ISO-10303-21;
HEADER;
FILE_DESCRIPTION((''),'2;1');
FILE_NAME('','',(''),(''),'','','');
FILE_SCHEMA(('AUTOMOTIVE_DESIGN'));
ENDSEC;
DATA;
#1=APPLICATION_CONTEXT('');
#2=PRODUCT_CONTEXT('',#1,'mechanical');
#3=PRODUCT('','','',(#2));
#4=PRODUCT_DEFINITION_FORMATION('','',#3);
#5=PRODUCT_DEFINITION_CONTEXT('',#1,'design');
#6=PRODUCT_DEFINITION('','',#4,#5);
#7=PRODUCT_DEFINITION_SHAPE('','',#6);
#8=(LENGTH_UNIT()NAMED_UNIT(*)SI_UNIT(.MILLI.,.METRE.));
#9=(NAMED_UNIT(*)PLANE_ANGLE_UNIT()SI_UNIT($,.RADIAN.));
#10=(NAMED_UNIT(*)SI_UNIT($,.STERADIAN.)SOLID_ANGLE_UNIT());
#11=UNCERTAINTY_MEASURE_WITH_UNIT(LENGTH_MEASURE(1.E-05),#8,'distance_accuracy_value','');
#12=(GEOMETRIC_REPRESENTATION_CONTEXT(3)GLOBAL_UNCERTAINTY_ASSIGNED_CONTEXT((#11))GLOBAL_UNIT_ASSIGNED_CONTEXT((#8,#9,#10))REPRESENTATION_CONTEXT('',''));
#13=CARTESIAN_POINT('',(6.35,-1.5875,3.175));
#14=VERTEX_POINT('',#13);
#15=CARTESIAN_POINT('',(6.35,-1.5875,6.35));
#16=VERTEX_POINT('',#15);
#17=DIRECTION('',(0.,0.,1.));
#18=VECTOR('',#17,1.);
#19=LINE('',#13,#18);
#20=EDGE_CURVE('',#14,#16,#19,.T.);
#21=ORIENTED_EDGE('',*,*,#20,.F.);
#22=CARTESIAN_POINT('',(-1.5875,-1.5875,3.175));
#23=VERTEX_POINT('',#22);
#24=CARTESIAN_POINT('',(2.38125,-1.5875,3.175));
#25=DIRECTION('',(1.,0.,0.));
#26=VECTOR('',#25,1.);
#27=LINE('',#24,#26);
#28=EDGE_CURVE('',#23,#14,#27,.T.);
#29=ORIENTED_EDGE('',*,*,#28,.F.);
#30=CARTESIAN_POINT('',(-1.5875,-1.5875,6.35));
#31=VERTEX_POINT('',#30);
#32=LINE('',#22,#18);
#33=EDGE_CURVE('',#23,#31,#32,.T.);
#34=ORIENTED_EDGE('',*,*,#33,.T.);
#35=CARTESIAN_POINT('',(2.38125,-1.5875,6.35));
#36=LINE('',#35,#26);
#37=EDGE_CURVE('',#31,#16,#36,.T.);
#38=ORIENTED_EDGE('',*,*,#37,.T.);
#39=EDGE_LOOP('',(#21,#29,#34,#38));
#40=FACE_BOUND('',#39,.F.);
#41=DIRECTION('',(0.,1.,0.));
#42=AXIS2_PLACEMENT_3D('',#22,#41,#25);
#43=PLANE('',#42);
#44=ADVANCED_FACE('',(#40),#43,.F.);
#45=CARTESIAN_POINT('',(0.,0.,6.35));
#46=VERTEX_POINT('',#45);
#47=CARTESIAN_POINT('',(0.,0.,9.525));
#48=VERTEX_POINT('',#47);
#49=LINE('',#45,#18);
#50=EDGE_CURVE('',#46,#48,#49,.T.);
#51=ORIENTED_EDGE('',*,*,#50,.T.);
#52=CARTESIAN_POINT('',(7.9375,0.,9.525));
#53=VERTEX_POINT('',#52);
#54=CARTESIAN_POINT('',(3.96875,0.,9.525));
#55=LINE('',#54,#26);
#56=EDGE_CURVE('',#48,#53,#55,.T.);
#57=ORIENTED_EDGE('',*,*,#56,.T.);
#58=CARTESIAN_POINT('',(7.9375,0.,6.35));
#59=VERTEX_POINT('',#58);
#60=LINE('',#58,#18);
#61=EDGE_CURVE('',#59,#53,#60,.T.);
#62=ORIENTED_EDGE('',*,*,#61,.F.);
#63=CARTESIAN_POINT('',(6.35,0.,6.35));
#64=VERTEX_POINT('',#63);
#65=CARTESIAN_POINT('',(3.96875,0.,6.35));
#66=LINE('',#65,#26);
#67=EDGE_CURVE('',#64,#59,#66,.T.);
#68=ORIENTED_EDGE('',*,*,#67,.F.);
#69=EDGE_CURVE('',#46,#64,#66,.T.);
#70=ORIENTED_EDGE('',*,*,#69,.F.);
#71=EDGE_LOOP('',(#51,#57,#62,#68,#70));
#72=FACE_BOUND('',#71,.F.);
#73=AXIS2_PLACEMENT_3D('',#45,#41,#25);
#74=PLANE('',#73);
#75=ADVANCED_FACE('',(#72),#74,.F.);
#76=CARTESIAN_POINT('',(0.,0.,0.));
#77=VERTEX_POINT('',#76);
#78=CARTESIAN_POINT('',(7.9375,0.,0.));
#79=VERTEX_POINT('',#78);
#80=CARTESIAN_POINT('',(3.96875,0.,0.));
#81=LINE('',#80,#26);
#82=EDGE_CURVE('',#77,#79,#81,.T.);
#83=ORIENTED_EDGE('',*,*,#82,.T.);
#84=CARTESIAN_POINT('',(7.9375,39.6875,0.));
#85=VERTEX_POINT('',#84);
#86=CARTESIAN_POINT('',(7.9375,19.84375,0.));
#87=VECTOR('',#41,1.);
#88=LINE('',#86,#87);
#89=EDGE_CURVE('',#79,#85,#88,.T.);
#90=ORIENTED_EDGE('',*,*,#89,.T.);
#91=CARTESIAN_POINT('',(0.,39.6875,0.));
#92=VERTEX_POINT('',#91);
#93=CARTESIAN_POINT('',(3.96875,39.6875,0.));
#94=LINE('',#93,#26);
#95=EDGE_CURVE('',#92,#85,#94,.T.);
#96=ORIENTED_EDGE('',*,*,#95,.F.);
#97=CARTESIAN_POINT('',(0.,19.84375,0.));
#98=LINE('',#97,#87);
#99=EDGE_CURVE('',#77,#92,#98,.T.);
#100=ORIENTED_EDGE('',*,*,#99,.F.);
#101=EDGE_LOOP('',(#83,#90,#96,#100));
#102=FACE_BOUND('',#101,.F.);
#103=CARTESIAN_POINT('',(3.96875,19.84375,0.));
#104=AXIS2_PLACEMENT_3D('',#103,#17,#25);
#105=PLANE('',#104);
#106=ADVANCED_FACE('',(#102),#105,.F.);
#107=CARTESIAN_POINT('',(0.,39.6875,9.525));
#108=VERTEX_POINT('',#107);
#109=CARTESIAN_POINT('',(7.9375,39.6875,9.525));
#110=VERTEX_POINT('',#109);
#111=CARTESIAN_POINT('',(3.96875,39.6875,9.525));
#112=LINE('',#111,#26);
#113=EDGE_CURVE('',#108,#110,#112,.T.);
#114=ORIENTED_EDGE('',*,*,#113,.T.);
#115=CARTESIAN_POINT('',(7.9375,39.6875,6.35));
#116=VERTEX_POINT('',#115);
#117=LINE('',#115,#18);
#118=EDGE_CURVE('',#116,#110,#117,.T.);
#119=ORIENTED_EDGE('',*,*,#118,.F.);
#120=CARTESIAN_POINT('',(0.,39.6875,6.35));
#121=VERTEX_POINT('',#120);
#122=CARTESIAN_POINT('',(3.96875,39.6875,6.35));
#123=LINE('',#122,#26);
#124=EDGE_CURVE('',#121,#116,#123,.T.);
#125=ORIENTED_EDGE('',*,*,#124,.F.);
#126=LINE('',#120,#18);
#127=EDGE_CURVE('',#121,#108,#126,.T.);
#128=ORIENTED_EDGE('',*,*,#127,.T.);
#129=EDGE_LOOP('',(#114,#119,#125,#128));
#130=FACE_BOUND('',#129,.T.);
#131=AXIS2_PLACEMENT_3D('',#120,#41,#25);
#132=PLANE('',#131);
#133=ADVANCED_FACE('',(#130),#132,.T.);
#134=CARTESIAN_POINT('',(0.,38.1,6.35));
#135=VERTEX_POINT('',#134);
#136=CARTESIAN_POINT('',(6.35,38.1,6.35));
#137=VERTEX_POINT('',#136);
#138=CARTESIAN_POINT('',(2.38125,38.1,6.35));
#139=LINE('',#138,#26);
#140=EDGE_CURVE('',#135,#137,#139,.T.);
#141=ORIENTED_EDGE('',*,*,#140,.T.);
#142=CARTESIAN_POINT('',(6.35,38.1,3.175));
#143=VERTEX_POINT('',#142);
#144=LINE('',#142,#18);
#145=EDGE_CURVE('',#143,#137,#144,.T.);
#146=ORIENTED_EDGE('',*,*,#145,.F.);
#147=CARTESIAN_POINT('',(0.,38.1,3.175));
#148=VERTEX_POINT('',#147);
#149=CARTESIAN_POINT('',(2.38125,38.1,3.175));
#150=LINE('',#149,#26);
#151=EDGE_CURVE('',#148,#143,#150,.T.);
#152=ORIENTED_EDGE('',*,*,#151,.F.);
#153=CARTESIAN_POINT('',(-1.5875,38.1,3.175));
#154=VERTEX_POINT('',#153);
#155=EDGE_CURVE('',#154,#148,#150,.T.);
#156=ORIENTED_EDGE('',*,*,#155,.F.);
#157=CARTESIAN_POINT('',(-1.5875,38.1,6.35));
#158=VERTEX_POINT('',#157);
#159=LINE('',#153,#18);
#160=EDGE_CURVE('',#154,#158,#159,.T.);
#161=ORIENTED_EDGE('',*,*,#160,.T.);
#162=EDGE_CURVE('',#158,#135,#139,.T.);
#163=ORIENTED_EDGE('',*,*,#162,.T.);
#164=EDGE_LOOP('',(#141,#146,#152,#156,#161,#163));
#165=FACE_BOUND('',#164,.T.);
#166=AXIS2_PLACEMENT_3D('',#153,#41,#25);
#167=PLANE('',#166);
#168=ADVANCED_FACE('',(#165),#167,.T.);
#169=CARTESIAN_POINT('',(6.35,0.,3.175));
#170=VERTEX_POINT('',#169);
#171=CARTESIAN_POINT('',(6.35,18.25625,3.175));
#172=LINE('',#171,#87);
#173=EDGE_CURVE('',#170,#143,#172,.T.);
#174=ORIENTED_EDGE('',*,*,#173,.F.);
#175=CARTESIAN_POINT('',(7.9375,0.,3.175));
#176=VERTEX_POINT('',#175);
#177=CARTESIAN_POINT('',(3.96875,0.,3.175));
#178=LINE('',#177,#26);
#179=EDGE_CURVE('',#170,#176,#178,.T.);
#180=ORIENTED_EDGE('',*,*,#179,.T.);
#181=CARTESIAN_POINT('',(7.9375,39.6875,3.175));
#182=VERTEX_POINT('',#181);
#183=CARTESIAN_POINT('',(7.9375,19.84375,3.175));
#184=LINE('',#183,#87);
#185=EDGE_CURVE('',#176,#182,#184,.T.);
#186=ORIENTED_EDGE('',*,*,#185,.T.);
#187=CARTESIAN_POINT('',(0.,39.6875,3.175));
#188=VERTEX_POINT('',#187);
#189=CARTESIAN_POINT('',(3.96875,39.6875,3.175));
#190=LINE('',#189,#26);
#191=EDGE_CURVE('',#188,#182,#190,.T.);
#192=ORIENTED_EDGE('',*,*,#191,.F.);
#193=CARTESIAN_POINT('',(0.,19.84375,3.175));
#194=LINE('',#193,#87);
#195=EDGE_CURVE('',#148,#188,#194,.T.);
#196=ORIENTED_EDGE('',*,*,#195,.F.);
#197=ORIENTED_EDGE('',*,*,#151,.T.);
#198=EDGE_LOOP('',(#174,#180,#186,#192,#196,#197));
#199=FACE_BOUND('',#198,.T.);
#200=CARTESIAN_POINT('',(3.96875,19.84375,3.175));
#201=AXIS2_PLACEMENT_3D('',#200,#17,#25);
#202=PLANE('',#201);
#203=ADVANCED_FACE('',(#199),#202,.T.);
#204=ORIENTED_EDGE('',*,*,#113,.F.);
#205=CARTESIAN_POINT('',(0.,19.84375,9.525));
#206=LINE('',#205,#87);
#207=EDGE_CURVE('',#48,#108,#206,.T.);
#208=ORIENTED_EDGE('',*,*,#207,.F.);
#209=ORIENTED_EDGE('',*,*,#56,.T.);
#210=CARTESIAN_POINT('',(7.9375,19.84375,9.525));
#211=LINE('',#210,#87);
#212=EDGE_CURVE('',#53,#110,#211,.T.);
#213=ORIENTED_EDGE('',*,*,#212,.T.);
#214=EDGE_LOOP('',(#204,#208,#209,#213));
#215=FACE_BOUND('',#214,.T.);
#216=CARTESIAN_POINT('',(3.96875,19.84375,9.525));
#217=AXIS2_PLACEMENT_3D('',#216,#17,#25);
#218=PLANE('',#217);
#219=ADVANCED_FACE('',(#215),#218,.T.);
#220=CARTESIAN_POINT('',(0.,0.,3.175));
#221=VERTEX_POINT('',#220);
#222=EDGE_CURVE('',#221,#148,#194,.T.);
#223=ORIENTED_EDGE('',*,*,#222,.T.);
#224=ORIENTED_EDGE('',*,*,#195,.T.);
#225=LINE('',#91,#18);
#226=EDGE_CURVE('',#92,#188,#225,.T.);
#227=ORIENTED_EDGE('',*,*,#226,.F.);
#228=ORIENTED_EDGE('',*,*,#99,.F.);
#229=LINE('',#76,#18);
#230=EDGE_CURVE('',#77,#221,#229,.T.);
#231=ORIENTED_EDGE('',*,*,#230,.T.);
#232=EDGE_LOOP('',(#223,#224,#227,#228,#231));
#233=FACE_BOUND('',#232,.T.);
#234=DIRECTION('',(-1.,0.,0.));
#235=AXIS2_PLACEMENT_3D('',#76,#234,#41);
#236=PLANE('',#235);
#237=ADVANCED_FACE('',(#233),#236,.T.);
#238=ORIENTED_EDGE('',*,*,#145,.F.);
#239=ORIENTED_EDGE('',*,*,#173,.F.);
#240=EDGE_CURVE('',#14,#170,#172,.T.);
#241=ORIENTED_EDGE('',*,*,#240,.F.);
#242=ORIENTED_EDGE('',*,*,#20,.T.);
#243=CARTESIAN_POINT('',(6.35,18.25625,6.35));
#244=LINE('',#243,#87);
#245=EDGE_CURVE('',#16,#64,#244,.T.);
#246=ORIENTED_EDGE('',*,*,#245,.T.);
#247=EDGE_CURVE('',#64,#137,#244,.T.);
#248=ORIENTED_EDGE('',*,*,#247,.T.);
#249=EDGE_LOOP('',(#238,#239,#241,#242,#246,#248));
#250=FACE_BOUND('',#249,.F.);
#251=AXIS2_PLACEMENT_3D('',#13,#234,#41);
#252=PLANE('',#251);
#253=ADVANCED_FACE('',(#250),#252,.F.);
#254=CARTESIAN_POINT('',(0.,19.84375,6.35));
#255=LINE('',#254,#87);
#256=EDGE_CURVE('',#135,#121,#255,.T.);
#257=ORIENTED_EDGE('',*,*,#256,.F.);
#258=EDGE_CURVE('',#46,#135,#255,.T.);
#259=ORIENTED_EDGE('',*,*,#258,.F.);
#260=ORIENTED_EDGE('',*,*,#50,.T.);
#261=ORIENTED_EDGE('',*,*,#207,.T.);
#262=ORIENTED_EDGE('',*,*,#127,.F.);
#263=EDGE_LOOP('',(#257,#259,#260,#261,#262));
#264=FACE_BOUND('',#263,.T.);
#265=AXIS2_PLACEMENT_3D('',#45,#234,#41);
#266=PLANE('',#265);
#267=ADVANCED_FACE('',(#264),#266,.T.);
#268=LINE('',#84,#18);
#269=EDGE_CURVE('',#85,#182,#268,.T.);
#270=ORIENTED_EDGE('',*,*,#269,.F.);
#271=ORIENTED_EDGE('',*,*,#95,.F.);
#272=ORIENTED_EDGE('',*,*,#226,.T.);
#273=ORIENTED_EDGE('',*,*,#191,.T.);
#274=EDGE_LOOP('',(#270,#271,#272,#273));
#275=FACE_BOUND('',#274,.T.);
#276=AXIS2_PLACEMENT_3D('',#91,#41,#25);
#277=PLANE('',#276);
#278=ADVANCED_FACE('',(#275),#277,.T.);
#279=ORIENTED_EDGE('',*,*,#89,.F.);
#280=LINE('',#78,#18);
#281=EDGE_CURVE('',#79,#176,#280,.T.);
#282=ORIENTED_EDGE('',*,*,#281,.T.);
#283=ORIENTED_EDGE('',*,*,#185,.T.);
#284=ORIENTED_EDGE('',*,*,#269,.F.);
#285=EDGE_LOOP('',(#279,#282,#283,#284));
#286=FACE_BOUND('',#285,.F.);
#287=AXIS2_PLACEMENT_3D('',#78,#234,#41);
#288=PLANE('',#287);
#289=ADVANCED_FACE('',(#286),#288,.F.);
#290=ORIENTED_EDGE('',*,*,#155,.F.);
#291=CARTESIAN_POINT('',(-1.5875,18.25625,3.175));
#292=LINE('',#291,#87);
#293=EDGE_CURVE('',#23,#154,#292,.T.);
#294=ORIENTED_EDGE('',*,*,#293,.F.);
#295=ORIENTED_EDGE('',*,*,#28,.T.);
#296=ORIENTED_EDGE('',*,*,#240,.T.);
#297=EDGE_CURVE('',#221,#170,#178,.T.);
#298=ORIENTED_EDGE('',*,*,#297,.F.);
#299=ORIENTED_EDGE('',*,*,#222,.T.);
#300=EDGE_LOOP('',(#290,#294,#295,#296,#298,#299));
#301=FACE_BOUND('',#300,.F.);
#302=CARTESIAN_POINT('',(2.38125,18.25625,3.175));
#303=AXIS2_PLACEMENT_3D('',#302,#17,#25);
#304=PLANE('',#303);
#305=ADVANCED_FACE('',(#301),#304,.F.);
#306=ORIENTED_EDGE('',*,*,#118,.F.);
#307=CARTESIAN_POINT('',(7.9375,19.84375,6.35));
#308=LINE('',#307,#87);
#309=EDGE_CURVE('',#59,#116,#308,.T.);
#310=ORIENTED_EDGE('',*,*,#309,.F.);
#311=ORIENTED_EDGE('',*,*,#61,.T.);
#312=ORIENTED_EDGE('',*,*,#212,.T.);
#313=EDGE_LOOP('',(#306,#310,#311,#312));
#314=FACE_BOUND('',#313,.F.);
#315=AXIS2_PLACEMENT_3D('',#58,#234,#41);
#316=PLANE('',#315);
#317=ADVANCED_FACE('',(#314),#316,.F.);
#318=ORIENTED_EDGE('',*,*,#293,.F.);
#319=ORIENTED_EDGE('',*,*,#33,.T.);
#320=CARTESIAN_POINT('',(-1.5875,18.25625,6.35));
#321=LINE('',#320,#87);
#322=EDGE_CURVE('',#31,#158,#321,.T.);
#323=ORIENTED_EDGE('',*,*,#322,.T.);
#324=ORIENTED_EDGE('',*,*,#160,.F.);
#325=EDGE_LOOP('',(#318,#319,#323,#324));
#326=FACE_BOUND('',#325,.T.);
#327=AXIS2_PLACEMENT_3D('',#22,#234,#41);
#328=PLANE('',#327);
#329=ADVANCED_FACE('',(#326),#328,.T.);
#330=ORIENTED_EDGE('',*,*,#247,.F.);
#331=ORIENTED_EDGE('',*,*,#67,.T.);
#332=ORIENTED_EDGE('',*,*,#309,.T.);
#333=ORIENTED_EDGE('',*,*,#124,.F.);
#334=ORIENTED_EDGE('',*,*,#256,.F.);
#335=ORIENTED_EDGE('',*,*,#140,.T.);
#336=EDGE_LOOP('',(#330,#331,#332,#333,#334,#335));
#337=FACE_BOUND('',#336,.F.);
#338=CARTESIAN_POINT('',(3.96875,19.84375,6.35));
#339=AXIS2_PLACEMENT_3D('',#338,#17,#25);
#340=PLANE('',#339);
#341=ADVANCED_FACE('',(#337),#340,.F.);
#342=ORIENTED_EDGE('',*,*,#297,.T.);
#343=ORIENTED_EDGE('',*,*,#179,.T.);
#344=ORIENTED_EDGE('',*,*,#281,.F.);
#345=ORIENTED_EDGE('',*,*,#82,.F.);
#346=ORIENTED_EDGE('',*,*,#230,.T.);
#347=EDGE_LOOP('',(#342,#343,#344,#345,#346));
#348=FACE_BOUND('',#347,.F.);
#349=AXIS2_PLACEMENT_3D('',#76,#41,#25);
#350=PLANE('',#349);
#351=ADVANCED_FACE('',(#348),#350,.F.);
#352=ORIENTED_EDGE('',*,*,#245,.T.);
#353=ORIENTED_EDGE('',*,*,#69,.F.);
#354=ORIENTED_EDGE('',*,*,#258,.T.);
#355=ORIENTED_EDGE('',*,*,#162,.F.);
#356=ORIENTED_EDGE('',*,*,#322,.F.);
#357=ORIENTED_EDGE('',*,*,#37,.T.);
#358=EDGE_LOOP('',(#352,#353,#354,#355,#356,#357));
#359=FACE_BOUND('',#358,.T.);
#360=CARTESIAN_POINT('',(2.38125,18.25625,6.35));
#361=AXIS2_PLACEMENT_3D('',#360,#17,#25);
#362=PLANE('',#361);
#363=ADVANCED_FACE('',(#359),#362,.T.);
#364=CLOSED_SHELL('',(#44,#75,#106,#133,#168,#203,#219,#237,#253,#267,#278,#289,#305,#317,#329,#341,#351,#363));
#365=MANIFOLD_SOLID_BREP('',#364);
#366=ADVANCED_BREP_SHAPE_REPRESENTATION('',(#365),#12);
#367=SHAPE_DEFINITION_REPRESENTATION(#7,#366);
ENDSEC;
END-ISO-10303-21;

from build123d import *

# Parameters (mm, degrees)
F2_W     = 7.9375
F2_H     = 39.6875
F3_DEPTH = 3.175
F4_W     = 7.9375
F4_H     = 39.6875
F5_DEPTH = 3.175
F6_W     = 7.9375
F6_H     = 39.6875
F7_DEPTH = 3.175


# Not quite as in the source:
# - a variable given as a bare number and used for a length is read in inches; the dataset says mm whatever the document's units were


with BuildPart() as f3:
    # F2 (on Top) → F3 (new body)
    with BuildSketch(Plane.XY):
        with Locations((3.96875, 19.84375)):
            Rectangle(F2_W, F2_H)
    extrude(amount=F3_DEPTH)

    # F4 (on face) → F5 (join)
    with BuildSketch(Plane.XY.offset(3.175)):
        with Locations((2.38125, 18.25625)):
            Rectangle(F4_W, F4_H)
    extrude(amount=F5_DEPTH)

    # F6 (on face) → F7 (join)
    with BuildSketch(Plane.XY.offset(6.35)):
        with Locations((3.96875, 19.84375)):
            Rectangle(F6_W, F6_H)
    extrude(amount=F7_DEPTH)


solid = f3.part
